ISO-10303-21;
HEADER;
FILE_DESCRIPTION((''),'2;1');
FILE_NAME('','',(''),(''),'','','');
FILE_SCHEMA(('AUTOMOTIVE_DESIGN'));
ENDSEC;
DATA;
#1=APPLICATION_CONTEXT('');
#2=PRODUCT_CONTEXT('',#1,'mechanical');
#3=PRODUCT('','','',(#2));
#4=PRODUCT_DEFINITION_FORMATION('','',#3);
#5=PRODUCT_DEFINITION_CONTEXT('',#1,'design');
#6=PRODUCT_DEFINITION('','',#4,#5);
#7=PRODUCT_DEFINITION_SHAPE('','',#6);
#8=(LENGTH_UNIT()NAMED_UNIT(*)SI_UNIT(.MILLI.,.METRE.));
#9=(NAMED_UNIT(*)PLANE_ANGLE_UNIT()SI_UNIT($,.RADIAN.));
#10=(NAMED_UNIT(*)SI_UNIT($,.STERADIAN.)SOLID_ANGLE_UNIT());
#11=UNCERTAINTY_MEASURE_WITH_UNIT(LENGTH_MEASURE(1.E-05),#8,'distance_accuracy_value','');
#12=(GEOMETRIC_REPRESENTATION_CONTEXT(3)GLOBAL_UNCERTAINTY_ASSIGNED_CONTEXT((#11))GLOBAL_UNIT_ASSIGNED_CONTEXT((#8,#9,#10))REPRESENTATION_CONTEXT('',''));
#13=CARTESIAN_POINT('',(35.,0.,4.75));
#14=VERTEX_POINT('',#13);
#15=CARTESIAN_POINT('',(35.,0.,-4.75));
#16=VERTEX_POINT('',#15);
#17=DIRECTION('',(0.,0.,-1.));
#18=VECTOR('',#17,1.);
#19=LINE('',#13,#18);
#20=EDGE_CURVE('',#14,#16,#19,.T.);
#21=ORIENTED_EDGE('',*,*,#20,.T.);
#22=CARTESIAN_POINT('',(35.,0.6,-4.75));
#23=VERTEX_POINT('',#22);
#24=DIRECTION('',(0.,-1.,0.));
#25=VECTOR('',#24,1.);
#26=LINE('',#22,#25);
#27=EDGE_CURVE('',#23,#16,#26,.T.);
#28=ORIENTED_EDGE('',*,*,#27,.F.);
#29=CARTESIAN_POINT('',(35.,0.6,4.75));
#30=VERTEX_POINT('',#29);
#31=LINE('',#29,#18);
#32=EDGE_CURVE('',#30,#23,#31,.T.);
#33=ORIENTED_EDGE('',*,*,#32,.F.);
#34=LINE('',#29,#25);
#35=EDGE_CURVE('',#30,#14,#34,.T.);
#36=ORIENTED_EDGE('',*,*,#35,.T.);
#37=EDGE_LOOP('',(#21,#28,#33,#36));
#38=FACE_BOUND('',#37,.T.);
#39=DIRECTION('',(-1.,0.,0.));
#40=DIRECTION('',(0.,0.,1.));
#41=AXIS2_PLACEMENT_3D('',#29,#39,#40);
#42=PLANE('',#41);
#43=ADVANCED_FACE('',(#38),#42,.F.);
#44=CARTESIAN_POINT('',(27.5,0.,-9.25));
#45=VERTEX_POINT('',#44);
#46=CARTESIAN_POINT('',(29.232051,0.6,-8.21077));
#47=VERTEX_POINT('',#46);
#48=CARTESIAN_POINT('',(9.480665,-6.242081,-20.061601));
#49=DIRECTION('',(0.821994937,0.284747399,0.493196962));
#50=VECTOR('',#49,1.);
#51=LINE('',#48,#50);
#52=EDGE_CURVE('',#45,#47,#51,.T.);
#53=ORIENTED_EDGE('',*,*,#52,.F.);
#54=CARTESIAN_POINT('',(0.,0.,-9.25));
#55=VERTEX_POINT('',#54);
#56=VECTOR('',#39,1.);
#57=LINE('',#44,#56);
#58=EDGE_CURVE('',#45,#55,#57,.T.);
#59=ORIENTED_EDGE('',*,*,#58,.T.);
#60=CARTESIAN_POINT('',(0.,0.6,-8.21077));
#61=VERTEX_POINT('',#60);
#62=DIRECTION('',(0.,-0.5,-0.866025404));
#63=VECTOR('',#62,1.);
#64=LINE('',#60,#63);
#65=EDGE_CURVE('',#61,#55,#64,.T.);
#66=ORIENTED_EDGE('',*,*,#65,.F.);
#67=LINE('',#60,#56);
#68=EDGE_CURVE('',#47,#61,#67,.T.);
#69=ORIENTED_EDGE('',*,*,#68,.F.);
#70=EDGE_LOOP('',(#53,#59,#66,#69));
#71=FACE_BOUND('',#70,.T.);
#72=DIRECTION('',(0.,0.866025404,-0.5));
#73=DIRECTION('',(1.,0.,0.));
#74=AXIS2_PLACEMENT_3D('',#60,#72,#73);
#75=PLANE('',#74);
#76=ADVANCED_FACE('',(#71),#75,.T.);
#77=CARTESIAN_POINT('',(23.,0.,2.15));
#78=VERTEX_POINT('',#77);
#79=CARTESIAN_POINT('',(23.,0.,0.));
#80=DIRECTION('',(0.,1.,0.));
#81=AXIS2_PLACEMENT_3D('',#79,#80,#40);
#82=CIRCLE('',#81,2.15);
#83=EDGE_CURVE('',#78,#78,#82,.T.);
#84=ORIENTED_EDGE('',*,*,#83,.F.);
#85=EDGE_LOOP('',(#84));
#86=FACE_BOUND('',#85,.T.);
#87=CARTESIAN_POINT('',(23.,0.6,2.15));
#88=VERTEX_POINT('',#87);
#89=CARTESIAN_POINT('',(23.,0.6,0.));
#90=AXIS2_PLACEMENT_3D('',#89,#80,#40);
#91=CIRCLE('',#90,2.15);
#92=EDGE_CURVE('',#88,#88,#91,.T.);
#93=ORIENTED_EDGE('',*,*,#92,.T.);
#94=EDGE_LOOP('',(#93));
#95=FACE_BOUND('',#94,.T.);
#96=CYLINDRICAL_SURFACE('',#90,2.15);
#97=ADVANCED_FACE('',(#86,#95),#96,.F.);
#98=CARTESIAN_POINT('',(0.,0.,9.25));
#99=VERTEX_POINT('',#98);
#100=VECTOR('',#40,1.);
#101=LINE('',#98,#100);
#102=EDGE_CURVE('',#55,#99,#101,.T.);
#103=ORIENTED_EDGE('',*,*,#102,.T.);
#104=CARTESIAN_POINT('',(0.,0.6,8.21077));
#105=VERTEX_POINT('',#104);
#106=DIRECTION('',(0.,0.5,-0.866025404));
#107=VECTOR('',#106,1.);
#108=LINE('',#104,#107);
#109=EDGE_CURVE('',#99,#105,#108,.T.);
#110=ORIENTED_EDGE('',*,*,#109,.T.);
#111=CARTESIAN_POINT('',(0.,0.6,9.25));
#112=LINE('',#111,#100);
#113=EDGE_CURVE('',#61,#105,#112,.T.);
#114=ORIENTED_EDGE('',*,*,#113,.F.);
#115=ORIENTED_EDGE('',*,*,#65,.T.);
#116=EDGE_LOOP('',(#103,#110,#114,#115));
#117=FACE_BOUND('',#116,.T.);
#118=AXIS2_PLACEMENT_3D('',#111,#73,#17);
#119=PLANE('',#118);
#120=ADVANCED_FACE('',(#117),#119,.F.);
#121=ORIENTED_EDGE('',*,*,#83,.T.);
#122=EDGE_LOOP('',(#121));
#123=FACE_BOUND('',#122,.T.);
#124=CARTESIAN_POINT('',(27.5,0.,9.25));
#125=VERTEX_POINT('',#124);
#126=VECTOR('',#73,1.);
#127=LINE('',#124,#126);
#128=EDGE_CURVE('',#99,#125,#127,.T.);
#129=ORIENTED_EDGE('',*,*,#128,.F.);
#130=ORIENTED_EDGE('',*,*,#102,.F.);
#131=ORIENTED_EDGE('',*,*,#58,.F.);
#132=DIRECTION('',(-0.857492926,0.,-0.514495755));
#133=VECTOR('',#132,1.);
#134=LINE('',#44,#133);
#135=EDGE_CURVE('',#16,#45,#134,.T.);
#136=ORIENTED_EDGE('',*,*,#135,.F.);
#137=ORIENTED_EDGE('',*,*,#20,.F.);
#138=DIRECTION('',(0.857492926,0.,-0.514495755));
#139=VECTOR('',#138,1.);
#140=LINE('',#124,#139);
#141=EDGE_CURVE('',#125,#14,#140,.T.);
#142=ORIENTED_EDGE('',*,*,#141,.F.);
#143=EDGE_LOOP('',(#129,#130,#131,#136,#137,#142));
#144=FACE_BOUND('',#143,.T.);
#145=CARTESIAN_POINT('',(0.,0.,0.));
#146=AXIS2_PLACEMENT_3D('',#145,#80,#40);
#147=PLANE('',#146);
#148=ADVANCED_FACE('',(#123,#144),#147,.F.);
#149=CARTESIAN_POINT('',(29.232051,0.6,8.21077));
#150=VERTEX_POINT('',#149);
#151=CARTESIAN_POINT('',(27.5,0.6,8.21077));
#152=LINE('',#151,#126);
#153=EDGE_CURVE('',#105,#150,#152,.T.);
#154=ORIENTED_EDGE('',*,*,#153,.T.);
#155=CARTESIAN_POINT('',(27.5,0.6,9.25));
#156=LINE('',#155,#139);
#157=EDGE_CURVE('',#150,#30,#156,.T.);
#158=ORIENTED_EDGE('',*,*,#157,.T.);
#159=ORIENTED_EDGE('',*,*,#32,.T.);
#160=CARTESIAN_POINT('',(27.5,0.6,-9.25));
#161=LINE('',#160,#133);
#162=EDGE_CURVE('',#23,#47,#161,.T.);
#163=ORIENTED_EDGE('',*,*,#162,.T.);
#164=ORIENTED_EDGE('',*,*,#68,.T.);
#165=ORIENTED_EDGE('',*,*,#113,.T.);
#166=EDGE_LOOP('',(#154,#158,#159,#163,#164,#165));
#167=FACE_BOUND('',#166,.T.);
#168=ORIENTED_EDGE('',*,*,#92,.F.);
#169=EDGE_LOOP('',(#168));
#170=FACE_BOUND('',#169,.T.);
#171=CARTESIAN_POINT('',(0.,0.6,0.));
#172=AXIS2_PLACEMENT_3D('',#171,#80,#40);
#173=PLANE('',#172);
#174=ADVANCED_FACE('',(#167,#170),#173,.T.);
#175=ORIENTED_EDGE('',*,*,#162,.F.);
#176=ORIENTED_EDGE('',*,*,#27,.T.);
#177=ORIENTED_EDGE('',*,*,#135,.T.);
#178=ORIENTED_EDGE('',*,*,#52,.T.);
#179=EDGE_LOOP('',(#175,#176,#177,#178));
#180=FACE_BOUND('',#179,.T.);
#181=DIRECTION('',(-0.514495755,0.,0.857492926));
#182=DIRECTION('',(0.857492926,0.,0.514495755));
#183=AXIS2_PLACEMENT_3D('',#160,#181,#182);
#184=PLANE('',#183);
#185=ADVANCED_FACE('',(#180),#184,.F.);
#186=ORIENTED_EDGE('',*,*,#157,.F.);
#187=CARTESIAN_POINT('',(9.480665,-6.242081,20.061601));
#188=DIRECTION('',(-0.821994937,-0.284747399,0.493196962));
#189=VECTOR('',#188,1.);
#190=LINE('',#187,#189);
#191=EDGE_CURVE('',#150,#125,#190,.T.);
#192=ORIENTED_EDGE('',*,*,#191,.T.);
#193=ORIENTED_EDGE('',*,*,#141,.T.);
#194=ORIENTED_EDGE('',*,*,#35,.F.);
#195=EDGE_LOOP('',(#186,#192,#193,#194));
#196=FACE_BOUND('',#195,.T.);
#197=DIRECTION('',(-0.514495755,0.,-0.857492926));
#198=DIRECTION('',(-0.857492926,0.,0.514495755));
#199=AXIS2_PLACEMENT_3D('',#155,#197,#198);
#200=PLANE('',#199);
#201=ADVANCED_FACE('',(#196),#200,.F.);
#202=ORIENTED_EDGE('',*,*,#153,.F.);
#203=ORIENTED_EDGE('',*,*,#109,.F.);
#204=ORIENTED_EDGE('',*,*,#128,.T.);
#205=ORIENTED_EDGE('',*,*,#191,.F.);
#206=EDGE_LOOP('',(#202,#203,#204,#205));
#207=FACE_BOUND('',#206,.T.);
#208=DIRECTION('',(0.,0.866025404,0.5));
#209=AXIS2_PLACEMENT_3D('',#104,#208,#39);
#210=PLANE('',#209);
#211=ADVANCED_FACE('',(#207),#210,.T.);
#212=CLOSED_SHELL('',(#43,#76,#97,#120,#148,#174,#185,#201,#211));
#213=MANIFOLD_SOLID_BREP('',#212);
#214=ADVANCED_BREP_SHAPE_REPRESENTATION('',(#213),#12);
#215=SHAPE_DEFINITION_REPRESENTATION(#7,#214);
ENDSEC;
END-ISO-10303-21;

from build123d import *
from OCP.BRepFilletAPI import BRepFilletAPI_MakeChamfer

# Parameters (mm, degrees)
BOSS_EXTRU_1_DEPTH = 0.6
D_GAGEMENT_M41_D   = 4.3
CHANFREIN1_SIZE    = 0.6
CHANFREIN1_SIZE_2  = 1.039230485


with BuildPart() as part:
    # Esquisse1 → Boss.-Extru.1 (new body)
    with BuildSketch(Plane(origin=(0, 0, 0), x_dir=(1, 0, 0), z_dir=(0, 1, 0))):
        Polygon((27.5, 9.25), (35, 4.75), (35, -4.75), (27.5, -9.25), (0, -9.25), (0, 9.25), align=None)
    extrude(amount=BOSS_EXTRU_1_DEPTH)

    # Dégagement M41 (through all)
    with Locations(Plane(origin=(0, 0.6, 0), x_dir=(1, 0, 0), z_dir=(0, 1, 0))):
        with Locations((23, 0)):
            Hole(D_GAGEMENT_M41_D / 2)

    # Chanfrein1
    chanfrein1_edges_1 = [part.edges().sort_by_distance(p)[0] for p in [
        (13.75, 0.6, -9.25),
    ]]
    chanfrein1_side_1 = [part.faces().sort_by_distance(p)[0] for p in [
        (13.75, 0.588, -9.25),
    ]]
    chanfrein1_edges_2 = [part.edges().sort_by_distance(p)[0] for p in [
        (13.75, 0.6, 9.25),
    ]]
    chanfrein1_side_2 = [part.faces().sort_by_distance(p)[0] for p in [
        (13.75, 0.6, 9.238),
    ]]
    chanfrein1 = BRepFilletAPI_MakeChamfer(part.part.solid().wrapped)
    for e in chanfrein1_edges_1:
        chanfrein1.Add(CHANFREIN1_SIZE - 0.0001, CHANFREIN1_SIZE_2 - 0.0001, e.wrapped, chanfrein1_side_1[0].wrapped)
    for e in chanfrein1_edges_2:
        chanfrein1.Add(CHANFREIN1_SIZE_2 - 0.0001, CHANFREIN1_SIZE - 0.0001, e.wrapped, chanfrein1_side_2[0].wrapped)
    add(Compound.cast(chanfrein1.Shape()), mode=Mode.REPLACE)  # a hair under: the kernel refuses the full size


solid = part.part
